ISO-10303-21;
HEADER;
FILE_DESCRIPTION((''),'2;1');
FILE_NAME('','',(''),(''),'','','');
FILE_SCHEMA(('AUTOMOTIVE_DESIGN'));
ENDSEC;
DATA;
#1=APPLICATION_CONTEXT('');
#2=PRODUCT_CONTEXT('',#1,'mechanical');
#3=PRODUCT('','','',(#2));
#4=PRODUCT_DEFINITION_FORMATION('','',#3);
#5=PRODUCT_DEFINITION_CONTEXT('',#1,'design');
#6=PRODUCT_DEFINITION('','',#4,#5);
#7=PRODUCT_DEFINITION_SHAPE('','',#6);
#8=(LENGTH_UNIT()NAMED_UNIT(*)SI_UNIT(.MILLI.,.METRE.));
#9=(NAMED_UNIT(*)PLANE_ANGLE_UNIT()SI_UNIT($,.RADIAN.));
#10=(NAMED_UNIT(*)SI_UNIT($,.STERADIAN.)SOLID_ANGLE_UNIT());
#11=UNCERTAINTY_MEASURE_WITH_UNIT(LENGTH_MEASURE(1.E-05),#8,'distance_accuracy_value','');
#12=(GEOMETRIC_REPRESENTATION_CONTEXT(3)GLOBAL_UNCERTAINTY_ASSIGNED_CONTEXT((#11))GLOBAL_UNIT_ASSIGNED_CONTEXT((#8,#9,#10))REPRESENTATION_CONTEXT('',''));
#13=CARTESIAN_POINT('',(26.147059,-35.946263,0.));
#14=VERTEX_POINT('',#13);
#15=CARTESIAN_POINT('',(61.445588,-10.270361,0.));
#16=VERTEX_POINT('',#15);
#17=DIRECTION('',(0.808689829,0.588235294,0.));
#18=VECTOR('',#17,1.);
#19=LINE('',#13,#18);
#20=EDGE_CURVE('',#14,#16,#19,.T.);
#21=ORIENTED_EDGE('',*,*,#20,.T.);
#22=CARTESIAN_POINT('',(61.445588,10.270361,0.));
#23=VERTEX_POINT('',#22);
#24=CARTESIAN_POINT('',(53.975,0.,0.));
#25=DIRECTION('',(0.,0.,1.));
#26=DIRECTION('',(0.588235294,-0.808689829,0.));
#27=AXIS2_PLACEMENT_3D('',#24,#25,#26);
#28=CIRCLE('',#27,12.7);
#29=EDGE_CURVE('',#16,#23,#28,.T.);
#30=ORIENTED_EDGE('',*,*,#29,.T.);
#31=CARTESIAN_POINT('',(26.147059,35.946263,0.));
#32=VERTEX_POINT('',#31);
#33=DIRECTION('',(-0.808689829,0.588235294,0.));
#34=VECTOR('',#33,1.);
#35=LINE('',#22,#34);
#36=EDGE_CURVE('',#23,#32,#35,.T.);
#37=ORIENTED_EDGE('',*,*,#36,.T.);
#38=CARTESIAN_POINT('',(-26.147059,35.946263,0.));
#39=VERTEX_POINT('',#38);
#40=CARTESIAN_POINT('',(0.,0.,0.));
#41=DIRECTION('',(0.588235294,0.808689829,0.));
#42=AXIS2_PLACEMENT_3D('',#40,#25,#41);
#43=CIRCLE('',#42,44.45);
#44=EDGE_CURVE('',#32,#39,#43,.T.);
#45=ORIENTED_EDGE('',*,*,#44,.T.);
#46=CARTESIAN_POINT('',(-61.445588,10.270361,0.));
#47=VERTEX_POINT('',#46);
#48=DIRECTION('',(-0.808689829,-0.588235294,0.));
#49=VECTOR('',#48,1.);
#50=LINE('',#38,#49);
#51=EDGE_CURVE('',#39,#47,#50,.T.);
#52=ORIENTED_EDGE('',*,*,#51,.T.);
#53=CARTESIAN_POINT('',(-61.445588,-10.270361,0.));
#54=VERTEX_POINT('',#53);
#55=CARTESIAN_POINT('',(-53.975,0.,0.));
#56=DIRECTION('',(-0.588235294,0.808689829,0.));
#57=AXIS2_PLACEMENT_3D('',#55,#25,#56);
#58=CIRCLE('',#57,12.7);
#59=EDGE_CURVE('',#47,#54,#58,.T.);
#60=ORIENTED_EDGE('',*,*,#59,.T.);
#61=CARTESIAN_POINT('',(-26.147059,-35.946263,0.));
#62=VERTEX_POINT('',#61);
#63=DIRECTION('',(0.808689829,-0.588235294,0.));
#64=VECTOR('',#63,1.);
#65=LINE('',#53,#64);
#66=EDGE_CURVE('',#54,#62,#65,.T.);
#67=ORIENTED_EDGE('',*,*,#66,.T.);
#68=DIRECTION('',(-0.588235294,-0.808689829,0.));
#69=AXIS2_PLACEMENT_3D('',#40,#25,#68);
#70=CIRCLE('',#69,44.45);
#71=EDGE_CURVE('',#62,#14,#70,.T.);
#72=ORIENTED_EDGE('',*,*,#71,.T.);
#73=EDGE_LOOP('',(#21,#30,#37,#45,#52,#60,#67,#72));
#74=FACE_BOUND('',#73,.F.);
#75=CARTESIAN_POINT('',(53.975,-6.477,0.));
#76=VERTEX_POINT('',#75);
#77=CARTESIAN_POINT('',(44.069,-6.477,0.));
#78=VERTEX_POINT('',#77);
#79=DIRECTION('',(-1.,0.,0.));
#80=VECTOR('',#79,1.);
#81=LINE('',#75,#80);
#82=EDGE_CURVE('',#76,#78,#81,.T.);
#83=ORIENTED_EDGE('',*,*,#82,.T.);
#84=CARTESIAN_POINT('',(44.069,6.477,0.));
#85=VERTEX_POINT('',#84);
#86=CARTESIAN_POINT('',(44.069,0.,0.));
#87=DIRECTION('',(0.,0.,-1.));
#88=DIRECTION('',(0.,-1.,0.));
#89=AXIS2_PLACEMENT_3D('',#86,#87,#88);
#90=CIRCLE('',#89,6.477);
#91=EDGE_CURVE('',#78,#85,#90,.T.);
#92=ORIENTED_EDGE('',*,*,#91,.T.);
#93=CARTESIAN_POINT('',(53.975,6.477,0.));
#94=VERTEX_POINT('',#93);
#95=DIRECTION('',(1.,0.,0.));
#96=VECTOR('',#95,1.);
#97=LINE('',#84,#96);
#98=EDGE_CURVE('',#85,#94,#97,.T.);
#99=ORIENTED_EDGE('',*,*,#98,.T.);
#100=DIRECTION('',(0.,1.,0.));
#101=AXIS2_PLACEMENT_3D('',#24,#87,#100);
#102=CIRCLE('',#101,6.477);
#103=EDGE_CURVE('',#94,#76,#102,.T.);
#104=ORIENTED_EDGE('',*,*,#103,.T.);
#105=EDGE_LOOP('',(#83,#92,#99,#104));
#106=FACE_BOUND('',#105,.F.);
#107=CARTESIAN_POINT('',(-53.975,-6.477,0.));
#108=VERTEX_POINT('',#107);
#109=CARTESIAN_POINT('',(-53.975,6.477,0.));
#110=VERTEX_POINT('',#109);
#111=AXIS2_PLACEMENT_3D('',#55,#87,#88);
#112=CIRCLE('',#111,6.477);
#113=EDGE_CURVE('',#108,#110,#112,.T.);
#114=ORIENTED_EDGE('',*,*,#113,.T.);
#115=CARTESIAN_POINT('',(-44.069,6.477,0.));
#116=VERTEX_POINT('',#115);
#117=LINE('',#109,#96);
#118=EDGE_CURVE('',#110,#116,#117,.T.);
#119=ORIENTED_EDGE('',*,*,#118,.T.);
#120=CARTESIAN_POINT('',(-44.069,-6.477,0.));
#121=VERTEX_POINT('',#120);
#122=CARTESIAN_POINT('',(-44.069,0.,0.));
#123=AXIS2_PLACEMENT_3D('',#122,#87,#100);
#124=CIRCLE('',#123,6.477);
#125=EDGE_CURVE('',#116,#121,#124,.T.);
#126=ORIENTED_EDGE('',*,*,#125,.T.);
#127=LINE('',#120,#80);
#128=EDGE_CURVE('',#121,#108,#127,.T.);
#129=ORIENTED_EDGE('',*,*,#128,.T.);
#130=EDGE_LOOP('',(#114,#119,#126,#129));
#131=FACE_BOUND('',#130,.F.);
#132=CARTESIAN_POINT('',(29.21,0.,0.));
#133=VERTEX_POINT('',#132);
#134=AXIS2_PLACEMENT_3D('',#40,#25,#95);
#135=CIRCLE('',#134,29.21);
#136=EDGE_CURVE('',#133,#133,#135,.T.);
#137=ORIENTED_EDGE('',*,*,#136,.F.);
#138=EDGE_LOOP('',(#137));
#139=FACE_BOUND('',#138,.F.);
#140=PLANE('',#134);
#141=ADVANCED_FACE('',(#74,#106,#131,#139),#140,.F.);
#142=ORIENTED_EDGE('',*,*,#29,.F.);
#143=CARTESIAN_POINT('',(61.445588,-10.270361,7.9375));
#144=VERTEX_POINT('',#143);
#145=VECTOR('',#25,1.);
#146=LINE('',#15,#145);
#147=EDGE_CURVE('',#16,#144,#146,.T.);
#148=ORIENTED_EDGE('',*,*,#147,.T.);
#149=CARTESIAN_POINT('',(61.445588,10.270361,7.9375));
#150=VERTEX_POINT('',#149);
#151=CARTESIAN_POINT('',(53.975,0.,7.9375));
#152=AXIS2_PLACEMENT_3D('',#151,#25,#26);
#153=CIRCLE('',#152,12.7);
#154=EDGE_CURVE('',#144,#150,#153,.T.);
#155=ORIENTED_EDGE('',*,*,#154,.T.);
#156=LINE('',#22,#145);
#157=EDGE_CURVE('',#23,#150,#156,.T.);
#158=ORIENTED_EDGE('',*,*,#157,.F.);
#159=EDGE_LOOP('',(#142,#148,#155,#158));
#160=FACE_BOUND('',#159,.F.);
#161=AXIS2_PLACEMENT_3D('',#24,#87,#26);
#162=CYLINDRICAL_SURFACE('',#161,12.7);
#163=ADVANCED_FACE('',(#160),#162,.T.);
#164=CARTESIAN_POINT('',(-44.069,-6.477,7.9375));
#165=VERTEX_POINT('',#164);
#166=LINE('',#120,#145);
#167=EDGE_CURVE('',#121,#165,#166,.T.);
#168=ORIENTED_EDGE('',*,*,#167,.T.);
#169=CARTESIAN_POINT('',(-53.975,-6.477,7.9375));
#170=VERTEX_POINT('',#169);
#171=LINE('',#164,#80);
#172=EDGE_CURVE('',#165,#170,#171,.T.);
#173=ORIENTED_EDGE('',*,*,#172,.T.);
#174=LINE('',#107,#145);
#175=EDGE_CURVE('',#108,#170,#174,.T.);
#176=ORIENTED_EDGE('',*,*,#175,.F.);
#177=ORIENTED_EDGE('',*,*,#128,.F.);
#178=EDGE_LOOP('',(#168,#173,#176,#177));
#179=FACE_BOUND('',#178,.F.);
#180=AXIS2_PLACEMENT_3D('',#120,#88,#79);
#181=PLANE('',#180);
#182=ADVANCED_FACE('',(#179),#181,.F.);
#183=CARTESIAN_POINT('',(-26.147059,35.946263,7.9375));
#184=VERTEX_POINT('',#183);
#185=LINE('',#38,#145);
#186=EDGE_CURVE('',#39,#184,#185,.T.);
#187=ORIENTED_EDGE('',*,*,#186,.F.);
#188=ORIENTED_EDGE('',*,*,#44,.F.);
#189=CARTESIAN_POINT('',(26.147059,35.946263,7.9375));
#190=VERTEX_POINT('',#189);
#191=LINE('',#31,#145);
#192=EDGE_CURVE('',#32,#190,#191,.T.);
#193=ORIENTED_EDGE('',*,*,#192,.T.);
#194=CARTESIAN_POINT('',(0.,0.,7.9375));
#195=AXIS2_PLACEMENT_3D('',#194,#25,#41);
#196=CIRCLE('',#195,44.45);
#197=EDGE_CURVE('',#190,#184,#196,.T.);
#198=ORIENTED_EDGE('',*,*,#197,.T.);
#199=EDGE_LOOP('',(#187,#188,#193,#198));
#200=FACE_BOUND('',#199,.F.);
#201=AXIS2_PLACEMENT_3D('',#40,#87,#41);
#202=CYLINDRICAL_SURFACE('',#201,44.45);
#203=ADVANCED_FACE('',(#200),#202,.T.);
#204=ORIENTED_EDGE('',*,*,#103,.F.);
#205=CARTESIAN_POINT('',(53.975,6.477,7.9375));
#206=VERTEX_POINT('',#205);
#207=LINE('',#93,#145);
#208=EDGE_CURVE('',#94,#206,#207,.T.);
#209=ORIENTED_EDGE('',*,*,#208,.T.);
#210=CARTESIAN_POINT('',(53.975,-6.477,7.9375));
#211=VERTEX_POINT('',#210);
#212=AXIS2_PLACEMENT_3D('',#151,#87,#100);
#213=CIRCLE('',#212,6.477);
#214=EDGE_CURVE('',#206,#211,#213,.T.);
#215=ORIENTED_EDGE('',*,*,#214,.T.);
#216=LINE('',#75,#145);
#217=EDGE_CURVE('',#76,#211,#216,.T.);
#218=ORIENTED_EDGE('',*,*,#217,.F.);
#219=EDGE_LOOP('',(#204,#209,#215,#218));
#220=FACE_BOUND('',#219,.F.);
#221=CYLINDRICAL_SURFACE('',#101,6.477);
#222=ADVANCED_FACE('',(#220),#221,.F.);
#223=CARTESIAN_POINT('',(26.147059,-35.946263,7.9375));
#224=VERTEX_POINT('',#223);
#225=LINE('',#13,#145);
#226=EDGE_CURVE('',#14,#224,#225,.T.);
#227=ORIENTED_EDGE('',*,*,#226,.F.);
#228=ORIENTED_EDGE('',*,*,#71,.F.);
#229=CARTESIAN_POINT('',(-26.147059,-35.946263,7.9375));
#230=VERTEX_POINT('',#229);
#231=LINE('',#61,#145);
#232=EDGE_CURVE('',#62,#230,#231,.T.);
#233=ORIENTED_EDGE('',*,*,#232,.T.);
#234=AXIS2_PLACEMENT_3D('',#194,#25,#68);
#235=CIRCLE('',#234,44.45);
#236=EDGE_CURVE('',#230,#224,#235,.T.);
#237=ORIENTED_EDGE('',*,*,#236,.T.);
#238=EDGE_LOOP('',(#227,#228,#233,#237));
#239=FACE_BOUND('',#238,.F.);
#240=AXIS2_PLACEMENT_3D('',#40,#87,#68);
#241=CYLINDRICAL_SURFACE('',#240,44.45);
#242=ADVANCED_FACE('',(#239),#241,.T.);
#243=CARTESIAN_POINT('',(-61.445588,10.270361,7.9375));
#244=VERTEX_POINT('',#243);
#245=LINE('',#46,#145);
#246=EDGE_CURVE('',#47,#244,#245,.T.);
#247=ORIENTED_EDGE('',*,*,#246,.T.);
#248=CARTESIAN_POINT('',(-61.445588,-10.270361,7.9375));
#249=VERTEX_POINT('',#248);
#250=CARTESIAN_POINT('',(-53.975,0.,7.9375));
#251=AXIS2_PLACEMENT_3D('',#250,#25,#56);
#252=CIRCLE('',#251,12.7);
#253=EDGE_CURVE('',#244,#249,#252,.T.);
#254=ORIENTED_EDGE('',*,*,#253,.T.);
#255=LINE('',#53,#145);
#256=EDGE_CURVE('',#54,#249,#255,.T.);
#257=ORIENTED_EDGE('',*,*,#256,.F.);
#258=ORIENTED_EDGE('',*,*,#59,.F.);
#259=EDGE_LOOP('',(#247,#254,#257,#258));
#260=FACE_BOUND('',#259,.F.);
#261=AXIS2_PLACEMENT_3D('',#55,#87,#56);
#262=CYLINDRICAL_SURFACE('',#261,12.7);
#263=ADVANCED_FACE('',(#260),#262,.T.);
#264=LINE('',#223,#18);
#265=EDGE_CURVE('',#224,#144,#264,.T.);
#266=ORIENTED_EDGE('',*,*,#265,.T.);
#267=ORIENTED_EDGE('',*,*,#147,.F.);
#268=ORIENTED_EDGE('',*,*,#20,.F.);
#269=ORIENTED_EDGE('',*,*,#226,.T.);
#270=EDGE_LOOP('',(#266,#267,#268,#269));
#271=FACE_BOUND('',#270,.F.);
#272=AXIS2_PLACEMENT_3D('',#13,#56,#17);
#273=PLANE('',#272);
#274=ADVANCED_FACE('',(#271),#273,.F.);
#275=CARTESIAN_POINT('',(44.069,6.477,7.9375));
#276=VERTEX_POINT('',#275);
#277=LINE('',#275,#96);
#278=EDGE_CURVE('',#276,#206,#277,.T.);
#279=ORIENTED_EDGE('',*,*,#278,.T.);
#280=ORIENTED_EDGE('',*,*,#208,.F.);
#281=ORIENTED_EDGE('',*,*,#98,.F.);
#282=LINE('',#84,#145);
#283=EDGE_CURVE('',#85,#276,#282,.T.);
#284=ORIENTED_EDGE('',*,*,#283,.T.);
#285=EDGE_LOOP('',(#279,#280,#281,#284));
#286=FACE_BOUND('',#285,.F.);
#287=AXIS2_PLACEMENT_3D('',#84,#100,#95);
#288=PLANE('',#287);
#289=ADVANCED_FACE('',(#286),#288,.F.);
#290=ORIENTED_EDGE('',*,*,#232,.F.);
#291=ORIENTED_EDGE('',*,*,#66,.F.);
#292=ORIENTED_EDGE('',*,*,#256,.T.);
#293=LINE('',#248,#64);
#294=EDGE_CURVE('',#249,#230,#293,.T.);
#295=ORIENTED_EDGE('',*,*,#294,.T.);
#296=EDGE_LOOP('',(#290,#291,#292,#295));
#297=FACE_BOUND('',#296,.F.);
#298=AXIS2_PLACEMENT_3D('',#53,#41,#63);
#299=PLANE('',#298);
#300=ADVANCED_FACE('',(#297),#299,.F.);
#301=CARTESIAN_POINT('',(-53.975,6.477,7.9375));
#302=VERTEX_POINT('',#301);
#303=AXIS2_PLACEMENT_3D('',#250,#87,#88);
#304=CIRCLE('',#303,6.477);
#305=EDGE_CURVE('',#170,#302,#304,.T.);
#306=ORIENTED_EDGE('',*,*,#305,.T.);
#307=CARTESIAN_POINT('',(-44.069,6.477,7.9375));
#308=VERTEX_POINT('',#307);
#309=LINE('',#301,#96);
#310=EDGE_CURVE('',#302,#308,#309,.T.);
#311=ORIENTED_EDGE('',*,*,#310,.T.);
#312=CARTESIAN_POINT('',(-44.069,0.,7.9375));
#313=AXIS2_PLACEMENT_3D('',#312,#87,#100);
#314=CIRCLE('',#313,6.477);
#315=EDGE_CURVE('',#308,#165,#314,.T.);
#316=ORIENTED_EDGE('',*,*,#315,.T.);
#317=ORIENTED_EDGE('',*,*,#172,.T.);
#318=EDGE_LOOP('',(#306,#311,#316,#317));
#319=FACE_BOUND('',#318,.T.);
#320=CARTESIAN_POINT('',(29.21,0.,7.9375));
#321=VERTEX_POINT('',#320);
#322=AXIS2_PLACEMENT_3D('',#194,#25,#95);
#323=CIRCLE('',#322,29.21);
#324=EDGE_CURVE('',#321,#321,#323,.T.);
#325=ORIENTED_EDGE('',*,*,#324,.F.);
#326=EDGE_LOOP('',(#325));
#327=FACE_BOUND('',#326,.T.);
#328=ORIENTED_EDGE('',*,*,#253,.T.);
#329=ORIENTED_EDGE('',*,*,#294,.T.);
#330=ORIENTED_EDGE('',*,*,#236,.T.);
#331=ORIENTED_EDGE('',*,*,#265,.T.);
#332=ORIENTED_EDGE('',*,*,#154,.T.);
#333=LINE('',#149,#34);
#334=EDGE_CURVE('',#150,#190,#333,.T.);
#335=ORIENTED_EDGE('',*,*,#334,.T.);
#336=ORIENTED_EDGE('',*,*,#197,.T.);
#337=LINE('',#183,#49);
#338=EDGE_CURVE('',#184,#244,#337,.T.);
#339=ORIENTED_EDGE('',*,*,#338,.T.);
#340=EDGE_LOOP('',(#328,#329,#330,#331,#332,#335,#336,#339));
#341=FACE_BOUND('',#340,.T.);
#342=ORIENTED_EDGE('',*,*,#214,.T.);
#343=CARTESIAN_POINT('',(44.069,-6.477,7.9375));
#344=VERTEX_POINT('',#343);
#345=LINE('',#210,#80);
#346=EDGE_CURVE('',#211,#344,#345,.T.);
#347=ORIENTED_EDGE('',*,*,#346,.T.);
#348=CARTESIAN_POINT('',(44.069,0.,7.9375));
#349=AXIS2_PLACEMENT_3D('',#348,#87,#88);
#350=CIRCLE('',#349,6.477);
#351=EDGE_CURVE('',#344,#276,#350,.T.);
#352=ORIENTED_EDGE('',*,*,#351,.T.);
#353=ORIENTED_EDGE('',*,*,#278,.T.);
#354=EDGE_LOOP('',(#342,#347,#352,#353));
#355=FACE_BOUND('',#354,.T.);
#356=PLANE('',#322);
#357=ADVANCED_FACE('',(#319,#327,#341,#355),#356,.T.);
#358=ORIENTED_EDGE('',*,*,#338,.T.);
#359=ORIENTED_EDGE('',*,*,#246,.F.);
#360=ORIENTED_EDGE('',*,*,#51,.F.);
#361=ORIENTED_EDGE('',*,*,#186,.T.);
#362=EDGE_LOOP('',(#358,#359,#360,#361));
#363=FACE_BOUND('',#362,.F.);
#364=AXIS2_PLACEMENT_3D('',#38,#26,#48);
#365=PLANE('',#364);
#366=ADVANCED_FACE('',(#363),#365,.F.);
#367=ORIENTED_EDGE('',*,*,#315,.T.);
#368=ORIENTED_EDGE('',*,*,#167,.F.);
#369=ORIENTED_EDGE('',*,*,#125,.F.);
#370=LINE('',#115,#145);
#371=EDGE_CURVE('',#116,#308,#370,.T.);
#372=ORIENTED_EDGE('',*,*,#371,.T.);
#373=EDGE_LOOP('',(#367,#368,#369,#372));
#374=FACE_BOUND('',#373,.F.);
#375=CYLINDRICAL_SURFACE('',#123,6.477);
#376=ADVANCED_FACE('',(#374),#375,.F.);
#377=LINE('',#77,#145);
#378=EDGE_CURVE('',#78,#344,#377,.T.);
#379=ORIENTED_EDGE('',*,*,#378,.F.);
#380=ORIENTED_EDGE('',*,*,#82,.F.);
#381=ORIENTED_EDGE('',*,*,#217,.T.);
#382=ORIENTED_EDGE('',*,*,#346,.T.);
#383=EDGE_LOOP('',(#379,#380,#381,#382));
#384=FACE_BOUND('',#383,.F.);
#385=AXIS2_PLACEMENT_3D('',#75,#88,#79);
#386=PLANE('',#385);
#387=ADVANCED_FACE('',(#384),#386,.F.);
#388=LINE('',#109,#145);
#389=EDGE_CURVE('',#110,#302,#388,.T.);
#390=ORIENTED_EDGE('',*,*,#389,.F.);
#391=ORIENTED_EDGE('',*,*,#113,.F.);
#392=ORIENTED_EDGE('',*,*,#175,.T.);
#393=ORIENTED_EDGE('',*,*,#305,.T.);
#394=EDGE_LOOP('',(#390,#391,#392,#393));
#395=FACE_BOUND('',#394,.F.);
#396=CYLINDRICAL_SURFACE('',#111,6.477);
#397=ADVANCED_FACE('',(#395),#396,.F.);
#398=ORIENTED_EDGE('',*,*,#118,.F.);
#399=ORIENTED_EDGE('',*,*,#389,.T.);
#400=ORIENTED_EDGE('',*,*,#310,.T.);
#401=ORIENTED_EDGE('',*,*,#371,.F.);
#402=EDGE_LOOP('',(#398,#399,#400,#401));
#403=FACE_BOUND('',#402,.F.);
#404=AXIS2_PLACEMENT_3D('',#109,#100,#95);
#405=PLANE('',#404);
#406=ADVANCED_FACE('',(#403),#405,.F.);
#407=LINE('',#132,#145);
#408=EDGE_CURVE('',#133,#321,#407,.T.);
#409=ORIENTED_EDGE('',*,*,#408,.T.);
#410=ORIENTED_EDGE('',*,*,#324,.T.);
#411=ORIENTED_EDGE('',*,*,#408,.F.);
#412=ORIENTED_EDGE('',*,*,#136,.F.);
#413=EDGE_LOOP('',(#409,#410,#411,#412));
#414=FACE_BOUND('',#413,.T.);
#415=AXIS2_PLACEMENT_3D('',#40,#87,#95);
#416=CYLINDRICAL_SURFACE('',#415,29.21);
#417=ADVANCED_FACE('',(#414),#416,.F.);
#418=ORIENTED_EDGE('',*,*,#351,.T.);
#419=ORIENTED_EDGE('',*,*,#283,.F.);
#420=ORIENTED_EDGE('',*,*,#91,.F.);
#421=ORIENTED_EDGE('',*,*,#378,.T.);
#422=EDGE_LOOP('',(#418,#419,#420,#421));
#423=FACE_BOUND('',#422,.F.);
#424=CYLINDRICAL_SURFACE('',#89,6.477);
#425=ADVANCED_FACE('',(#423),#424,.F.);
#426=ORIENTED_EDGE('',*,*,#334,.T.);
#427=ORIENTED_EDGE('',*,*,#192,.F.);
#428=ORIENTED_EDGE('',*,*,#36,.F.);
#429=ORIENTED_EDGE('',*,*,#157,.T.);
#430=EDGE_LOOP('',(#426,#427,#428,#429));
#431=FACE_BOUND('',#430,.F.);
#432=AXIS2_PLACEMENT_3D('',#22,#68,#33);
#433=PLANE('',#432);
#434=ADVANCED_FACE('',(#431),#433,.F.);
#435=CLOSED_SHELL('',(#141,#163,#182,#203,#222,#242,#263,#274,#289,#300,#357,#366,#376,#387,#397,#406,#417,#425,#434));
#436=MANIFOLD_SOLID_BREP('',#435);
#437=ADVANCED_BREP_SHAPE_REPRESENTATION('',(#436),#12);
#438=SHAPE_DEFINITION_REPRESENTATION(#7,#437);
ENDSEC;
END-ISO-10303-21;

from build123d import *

# Parameters (mm, degrees)
F0_R     = 29.21
F1_DEPTH = 7.9375


# Not quite as in the source:
# - a length typed as a fraction of an inch, garbled in the dataset ("3 / 203.2 mm" for 3/8 in), is restored


with BuildPart() as f1:
    # F0 (on Top) → F1 (new body)
    with BuildSketch(Plane.XY):
        with BuildLine():
            Line((-61.4455882353, -10.2703608222), (-26.1470588235, -35.9462628778))
            ThreePointArc((-26.1470588235, -35.9462628778), (0, -44.45), (26.1470588235, -35.9462628778))
            Line((26.1470588235, -35.9462628778), (61.4455882353, -10.2703608222))
            ThreePointArc((61.4455882353, -10.2703608222), (66.675, 0), (61.4455882353, 10.2703608222))
            Line((61.4455882353, 10.2703608222), (26.1470588235, 35.9462628778))
            ThreePointArc((26.1470588235, 35.9462628778), (0, 44.45), (-26.1470588235, 35.9462628778))
            Line((-26.1470588235, 35.9462628778), (-61.4455882353, 10.2703608222))
            ThreePointArc((-61.4455882353, 10.2703608222), (-66.675, 0), (-61.4455882353, -10.2703608222))
        make_face()
        with BuildLine():
            ThreePointArc((-44.069, 6.477), (-37.592, 0), (-44.069, -6.477))
            Line((-44.069, -6.477), (-53.975, -6.477))
            ThreePointArc((-53.975, -6.477), (-60.452, 0), (-53.975, 6.477))
            Line((-53.975, 6.477), (-44.069, 6.477))
        make_face(mode=Mode.SUBTRACT)
        Circle(F0_R, mode=Mode.SUBTRACT)
        with BuildLine():
            ThreePointArc((44.069, -6.477), (37.592, 0), (44.069, 6.477))
            Line((44.069, 6.477), (53.975, 6.477))
            ThreePointArc((53.975, 6.477), (60.452, 0), (53.975, -6.477))
            Line((53.975, -6.477), (44.069, -6.477))
        make_face(mode=Mode.SUBTRACT)
    extrude(amount=F1_DEPTH)


solid = f1.part
